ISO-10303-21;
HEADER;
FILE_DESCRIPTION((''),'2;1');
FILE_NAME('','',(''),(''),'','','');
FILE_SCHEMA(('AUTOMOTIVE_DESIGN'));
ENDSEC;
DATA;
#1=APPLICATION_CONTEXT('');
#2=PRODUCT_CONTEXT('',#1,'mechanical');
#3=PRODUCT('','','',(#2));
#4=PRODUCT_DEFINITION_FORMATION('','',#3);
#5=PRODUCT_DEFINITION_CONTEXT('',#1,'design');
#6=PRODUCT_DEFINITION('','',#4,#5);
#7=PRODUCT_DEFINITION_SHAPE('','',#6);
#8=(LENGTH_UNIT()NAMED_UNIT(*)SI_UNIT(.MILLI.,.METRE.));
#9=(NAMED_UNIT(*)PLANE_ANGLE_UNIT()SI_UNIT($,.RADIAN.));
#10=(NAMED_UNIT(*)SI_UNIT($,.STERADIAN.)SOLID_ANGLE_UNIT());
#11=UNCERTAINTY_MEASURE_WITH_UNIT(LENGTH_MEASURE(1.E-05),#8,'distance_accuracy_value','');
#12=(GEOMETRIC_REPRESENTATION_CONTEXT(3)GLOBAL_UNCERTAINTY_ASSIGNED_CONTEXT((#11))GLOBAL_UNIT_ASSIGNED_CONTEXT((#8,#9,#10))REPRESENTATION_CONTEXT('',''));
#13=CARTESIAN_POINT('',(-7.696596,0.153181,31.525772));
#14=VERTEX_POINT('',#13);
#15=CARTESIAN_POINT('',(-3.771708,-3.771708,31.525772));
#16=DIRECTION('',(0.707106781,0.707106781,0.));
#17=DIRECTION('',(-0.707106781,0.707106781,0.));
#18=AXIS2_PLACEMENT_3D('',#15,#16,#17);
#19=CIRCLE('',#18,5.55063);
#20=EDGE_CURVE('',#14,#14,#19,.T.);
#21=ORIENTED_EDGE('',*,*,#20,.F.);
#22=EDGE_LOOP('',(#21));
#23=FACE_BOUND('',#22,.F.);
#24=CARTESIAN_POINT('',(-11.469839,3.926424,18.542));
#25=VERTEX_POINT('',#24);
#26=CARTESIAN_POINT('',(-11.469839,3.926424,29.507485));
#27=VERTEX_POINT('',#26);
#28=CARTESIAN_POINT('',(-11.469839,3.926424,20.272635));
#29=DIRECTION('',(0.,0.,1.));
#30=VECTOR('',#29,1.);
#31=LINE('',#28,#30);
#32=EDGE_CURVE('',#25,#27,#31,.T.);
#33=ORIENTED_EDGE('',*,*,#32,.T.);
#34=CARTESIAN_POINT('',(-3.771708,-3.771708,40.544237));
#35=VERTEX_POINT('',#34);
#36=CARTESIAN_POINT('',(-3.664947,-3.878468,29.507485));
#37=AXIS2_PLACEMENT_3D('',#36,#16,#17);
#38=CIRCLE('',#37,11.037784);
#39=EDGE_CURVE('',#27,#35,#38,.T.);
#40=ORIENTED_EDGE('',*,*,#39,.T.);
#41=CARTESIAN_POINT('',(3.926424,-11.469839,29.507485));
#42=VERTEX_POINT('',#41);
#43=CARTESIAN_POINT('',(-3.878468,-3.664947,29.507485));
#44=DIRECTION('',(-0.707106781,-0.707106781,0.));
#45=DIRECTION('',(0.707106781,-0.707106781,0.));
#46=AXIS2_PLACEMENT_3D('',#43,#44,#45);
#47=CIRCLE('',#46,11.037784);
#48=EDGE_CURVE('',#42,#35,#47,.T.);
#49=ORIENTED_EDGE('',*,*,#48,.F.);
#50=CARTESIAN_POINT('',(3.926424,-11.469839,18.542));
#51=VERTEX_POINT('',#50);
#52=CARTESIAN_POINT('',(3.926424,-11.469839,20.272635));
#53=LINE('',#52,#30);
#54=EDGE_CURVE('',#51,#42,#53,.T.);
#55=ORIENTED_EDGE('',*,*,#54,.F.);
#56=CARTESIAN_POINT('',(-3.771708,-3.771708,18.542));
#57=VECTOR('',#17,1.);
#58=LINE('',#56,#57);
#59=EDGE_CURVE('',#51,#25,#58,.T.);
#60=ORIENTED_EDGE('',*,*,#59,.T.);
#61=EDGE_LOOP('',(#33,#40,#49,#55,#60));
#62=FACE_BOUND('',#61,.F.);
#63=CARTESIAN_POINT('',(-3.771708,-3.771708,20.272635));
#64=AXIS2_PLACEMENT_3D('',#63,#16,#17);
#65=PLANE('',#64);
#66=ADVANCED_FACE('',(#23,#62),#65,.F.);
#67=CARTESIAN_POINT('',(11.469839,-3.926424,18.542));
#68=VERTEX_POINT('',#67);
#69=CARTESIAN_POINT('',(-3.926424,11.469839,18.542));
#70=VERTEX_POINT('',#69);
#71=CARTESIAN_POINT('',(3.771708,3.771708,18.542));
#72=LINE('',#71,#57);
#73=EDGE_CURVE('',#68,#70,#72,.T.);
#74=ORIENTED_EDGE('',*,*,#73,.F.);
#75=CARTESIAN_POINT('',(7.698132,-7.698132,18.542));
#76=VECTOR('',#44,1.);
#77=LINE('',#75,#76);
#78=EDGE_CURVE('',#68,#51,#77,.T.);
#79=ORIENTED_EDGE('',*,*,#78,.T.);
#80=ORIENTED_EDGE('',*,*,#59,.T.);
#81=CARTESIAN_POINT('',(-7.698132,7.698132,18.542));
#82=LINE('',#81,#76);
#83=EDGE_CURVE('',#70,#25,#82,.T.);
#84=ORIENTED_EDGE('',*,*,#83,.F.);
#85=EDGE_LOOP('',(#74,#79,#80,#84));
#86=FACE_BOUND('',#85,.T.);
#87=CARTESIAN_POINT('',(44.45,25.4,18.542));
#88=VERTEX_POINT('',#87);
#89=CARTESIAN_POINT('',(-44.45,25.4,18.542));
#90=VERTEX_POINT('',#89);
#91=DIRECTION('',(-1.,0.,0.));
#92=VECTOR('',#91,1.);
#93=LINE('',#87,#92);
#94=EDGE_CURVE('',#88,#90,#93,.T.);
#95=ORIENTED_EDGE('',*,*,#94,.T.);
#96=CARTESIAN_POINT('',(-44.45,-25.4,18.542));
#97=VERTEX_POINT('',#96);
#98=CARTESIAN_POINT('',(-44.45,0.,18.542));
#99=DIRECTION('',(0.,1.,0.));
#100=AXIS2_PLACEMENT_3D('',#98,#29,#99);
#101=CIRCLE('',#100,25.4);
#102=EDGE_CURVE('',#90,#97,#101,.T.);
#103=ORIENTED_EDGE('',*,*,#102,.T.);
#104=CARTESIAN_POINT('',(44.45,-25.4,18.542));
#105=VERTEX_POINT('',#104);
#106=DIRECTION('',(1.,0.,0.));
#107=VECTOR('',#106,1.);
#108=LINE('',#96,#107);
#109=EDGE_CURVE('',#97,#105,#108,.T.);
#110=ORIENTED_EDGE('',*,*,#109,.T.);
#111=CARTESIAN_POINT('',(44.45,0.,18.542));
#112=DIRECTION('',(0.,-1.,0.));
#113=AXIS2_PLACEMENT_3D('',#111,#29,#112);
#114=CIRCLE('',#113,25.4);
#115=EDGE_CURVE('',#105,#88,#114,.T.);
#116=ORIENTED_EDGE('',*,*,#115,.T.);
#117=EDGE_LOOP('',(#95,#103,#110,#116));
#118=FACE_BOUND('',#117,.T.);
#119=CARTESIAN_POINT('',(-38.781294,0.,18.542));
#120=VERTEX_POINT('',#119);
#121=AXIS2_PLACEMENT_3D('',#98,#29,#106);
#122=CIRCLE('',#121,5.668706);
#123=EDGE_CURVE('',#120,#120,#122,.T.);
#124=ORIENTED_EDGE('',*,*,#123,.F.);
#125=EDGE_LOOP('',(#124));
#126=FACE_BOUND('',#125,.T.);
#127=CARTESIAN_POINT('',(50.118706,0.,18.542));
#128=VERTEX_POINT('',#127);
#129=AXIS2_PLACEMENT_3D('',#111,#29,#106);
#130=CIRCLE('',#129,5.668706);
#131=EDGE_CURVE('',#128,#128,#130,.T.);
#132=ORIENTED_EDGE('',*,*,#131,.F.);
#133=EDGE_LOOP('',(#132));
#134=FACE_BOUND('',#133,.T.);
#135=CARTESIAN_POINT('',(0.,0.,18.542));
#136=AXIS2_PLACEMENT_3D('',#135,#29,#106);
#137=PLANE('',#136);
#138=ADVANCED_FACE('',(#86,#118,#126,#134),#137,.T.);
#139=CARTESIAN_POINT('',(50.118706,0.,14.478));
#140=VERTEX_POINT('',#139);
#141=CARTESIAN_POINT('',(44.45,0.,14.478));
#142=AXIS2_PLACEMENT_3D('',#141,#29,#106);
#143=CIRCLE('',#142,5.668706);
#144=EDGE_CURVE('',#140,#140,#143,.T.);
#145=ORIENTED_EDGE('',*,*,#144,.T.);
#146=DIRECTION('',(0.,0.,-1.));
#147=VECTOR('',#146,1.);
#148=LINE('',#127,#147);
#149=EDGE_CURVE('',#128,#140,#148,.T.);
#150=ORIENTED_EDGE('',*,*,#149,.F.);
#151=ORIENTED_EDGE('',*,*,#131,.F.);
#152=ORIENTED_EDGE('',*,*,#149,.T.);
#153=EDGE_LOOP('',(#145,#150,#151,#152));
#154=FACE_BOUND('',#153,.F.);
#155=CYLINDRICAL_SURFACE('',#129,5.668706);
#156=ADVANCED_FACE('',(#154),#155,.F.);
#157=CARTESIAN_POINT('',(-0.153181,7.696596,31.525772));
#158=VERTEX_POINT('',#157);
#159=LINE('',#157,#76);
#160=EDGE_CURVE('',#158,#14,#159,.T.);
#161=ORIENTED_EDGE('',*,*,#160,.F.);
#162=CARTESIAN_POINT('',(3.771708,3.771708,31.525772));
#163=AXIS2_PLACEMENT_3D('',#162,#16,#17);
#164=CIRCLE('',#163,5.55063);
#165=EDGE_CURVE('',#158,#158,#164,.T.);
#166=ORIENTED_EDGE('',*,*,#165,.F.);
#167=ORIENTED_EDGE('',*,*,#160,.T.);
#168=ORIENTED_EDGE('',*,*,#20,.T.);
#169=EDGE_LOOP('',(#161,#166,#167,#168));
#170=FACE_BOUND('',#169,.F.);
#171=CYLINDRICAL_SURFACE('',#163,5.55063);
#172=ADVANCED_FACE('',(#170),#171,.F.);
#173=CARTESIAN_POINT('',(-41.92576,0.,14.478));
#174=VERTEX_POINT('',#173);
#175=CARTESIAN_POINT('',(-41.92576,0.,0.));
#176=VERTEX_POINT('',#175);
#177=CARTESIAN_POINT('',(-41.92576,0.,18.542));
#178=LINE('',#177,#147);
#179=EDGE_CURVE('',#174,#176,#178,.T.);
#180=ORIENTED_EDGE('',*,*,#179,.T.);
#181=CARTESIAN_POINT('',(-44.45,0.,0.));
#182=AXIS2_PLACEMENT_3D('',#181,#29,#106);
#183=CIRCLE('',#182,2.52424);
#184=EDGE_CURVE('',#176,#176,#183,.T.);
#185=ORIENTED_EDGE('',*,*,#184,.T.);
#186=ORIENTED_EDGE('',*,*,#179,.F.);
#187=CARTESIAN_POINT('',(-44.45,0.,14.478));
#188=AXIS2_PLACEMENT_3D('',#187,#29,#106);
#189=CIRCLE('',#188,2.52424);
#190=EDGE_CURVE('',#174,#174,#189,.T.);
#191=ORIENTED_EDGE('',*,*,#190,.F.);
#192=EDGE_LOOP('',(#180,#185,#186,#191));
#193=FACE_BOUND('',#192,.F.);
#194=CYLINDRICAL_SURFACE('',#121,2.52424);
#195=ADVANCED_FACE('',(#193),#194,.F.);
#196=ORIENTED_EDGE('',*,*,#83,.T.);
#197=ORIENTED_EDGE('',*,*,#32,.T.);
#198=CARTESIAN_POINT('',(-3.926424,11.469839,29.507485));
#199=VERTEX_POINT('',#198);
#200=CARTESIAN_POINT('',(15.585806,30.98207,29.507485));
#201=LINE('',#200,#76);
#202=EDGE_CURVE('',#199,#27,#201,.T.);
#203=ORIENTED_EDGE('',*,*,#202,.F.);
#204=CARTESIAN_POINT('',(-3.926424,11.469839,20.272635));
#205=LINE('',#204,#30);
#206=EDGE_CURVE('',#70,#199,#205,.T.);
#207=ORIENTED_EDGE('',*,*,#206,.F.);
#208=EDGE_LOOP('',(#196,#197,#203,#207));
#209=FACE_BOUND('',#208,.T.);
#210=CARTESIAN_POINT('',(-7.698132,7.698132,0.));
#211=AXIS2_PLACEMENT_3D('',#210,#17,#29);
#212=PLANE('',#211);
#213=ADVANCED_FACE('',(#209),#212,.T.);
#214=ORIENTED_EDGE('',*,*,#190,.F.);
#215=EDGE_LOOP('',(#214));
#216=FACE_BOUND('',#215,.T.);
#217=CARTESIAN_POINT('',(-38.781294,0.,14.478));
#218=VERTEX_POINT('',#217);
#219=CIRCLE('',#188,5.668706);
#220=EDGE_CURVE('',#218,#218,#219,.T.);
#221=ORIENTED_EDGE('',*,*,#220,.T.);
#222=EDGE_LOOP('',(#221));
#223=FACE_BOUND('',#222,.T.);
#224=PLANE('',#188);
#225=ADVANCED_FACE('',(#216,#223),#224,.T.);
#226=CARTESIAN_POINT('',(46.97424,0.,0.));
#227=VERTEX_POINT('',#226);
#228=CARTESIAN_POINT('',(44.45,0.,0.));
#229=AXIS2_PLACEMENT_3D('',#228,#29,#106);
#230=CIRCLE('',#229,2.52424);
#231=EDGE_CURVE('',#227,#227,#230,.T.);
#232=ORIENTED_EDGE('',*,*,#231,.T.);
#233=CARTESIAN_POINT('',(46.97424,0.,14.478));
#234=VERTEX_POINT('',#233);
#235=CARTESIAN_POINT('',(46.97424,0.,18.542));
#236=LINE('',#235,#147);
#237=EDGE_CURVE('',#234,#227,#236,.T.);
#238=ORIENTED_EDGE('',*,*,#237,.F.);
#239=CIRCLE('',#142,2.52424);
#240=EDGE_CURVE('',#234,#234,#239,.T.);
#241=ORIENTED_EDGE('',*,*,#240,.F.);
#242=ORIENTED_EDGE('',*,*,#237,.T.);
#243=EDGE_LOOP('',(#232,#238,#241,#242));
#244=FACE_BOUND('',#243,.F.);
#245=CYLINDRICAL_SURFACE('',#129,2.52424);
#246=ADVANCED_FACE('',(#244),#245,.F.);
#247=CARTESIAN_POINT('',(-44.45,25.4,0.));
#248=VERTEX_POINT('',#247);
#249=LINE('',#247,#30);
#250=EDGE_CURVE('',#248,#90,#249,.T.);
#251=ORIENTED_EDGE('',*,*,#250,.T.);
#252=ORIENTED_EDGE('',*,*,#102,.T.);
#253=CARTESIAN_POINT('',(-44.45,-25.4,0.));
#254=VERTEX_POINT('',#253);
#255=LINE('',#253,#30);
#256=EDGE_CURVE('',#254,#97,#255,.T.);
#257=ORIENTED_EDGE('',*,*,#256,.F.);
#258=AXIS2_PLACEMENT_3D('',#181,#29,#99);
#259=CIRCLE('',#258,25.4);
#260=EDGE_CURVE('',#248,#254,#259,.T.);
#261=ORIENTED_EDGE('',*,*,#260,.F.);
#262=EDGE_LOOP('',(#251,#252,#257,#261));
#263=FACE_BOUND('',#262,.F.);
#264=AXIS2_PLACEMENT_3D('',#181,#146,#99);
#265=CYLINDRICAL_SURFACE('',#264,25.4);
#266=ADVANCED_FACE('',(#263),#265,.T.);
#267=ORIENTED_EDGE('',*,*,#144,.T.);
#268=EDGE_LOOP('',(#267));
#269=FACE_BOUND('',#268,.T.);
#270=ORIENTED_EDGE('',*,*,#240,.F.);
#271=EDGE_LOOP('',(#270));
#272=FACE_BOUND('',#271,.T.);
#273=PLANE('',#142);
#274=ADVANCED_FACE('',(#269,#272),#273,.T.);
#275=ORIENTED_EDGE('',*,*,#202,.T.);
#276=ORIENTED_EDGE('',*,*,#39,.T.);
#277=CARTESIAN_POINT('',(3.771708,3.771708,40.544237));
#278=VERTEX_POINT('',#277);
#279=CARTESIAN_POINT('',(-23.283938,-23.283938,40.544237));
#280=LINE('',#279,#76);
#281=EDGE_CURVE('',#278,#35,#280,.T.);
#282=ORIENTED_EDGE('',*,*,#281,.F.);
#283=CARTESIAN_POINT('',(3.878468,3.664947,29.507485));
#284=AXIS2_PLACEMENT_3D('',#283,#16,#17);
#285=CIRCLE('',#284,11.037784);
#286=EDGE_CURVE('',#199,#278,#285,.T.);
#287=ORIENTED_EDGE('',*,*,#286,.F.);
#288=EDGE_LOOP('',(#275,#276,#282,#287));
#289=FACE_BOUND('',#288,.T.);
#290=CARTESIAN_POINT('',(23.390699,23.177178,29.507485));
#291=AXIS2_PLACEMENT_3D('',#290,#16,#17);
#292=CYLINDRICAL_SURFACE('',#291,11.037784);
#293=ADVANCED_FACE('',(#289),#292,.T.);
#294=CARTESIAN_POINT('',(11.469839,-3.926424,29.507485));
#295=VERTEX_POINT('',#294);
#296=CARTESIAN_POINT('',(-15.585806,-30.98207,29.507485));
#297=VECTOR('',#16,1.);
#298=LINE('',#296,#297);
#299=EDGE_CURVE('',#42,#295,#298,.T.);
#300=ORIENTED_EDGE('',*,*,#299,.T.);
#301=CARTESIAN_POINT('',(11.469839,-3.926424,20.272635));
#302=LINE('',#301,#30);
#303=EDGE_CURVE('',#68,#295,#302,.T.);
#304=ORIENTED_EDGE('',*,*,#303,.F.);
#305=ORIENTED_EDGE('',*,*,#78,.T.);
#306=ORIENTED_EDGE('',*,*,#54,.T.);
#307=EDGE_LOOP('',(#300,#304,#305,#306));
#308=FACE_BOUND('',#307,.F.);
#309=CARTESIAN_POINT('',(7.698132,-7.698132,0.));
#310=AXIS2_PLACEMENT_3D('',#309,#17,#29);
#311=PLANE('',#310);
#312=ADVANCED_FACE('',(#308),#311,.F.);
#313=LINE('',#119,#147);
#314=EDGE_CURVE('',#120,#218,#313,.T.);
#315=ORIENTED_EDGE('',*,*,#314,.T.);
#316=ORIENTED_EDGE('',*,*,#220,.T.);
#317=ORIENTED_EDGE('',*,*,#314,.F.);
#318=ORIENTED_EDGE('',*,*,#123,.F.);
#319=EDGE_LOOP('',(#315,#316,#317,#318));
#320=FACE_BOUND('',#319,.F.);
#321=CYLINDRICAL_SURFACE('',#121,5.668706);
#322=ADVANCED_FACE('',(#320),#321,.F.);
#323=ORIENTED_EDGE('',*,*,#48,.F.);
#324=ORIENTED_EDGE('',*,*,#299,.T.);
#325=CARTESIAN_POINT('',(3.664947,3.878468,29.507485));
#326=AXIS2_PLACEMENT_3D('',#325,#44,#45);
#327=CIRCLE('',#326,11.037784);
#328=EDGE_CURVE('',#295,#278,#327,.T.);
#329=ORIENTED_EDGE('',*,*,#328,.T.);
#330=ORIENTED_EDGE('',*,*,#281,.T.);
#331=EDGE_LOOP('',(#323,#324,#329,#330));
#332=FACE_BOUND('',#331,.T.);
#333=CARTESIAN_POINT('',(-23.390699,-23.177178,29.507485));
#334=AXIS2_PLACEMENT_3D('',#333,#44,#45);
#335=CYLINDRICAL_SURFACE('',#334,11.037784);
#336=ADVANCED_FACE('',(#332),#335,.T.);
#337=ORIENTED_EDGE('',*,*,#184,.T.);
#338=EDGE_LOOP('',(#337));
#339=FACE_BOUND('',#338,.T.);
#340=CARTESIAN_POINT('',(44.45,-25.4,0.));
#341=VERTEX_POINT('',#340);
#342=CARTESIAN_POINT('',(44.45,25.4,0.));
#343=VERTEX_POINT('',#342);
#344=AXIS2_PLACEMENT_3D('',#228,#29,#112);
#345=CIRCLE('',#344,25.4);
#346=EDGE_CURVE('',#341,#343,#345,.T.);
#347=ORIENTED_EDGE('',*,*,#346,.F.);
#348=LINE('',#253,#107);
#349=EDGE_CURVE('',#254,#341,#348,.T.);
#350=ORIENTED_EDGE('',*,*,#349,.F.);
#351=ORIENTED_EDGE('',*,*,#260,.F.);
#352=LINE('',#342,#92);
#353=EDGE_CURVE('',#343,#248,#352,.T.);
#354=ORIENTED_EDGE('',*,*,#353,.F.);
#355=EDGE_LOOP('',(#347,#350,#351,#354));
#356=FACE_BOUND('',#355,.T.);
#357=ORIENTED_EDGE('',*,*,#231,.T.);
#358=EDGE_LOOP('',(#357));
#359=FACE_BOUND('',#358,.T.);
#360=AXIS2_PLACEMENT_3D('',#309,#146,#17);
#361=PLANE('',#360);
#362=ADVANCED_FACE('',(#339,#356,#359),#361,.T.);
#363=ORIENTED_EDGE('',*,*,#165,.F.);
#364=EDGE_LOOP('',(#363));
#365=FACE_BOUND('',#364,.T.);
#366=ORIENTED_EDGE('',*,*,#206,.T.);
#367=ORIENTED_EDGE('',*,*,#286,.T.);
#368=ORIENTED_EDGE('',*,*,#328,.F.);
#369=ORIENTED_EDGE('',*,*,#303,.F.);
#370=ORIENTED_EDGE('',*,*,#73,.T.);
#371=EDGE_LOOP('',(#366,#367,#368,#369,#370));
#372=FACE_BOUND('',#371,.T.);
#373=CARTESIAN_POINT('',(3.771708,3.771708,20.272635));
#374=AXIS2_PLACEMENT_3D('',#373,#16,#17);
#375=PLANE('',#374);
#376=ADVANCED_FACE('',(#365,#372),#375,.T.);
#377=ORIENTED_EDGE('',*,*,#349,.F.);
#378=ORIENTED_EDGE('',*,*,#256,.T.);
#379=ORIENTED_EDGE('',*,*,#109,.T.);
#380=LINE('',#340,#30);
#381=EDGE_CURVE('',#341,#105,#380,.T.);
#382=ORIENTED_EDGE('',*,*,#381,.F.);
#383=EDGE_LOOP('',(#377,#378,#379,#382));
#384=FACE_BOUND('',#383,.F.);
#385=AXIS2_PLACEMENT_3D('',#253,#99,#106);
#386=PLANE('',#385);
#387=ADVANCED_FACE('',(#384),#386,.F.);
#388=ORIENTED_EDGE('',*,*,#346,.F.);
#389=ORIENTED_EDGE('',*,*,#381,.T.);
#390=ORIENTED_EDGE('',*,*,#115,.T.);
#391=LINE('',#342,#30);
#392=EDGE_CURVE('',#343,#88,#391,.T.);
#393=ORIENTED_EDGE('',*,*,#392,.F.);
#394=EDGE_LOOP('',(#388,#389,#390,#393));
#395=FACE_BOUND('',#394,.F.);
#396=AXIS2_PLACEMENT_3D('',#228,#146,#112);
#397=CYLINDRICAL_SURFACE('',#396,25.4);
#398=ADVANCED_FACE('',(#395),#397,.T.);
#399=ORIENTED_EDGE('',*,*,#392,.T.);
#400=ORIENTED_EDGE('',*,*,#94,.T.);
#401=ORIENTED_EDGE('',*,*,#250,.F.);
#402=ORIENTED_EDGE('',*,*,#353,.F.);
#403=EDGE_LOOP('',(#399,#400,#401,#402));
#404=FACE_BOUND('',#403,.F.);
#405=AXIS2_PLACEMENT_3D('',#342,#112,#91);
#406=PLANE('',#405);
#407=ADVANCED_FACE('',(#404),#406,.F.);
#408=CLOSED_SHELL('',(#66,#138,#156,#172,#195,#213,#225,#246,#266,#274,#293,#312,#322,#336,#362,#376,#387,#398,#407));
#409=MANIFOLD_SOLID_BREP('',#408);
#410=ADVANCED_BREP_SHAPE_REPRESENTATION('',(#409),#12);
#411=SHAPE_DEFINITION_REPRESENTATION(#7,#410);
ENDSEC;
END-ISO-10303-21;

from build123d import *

# Parameters (mm, degrees)
F1_DEPTH     = 18.542
F2_R         = 5.6687062333
F3_DEPTH     = 4.064
F4_R         = 2.5242395044
F5_DEPTH     = 18.543
F8_W         = 21.7736046761
F8_H         = 40.5452698469
F9_DEPTH     = 5.334
F10_T1_DEPTH = 65.8569220358
F10_T3_DEPTH = 65.8569220358
F11_R        = 5.5506303957
F12_DEPTH    = 72.686920908


# Not quite as in the source:
# - a fillet or chamfer that OpenCascade refuses, or shapes differently, is made with other operations: its cross-section is extruded or revolved along the edge and cut away or added


with BuildPart() as f1:
    # F0 (on Top) → F1 (new body)
    with BuildSketch(Plane.XY):
        with BuildLine():
            Line((44.45, 25.4), (-44.45, 25.4))
            ThreePointArc((-44.45, 25.4), (-69.85, 0), (-44.45, -25.4))
            Line((-44.45, -25.4), (44.45, -25.4))
            ThreePointArc((44.45, -25.4), (69.85, 0), (44.45, 25.4))
        make_face()
    extrude(amount=F1_DEPTH)

    # F2 (on face) → F3 (cut)
    with BuildSketch(Plane.XY.offset(18.542)):
        with Locations((-44.45, 0)):
            Circle(F2_R)
        with Locations((44.45, 0)):
            Circle(F2_R)
    extrude(amount=-F3_DEPTH, mode=Mode.SUBTRACT)

    # F4 (on face) → F5 (cut, through all)
    with BuildSketch(Plane.XY.offset(18.542)):
        with Locations((-44.45, 0)):
            Circle(F4_R)
        with Locations((44.45, 0)):
            Circle(F4_R)
    extrude(amount=-F5_DEPTH, mode=Mode.SUBTRACT)

    # F8 (on line) → F9 (join, symmetric)
    with BuildSketch(Plane(origin=(0, 0, 0), x_dir=(-0.7071067812, 0.7071067812, 0), z_dir=(0.7071067812, 0.7071067812, 0))):
        with Locations((0, 20.2726349235)):
            Rectangle(F8_W, F8_H)
    extrude(amount=F9_DEPTH, both=True)

    # F10: fillet of radius 11.0377844072 on 2 edges, made by hand

    # F10_s2 → F10_t1 (cut)
    with BuildSketch(Plane(origin=(-23.2839380798, -23.2839380798, 0), x_dir=(0, 0, 1), z_dir=(0.7071067812, 0.7071067812, 0))):
        with BuildLine():
            ThreePointArc((29.5074854397, 10.8868023381), (37.3123776433, 7.6539101345), (40.5452698469, -0.1509820691))
            Line((40.5452698469, -0.1509820691), (40.5452698469, 10.8868023381))
            Line((40.5452698469, 10.8868023381), (29.5074854397, 10.8868023381))
        make_face()
    extrude(amount=F10_T1_DEPTH, mode=Mode.SUBTRACT)

    # F10_s4 → F10_t3 (cut)
    with BuildSketch(Plane(origin=(23.2839380798, 23.2839380798, 0), x_dir=(0, 0, 1), z_dir=(-0.7071067812, -0.7071067812, 0))):
        with BuildLine():
            ThreePointArc((29.5074854397, 10.8868023381), (37.3123776433, 7.6539101345), (40.5452698469, -0.1509820691))
            Line((40.5452698469, -0.1509820691), (40.5452698469, 10.8868023381))
            Line((40.5452698469, 10.8868023381), (29.5074854397, 10.8868023381))
        make_face()
    extrude(amount=F10_T3_DEPTH, mode=Mode.SUBTRACT)

    # F11 (on face) → F12 (cut, through all)
    with BuildSketch(Plane(origin=(3.7717075708, 3.7717075708, 0), x_dir=(-0.7071067812, 0.7071067812, 0), z_dir=(0.7071067812, 0.7071067812, 0))):
        with Locations((0, 31.5257720649)):
            Circle(F11_R)
    extrude(amount=-F12_DEPTH, mode=Mode.SUBTRACT)


solid = f1.part
